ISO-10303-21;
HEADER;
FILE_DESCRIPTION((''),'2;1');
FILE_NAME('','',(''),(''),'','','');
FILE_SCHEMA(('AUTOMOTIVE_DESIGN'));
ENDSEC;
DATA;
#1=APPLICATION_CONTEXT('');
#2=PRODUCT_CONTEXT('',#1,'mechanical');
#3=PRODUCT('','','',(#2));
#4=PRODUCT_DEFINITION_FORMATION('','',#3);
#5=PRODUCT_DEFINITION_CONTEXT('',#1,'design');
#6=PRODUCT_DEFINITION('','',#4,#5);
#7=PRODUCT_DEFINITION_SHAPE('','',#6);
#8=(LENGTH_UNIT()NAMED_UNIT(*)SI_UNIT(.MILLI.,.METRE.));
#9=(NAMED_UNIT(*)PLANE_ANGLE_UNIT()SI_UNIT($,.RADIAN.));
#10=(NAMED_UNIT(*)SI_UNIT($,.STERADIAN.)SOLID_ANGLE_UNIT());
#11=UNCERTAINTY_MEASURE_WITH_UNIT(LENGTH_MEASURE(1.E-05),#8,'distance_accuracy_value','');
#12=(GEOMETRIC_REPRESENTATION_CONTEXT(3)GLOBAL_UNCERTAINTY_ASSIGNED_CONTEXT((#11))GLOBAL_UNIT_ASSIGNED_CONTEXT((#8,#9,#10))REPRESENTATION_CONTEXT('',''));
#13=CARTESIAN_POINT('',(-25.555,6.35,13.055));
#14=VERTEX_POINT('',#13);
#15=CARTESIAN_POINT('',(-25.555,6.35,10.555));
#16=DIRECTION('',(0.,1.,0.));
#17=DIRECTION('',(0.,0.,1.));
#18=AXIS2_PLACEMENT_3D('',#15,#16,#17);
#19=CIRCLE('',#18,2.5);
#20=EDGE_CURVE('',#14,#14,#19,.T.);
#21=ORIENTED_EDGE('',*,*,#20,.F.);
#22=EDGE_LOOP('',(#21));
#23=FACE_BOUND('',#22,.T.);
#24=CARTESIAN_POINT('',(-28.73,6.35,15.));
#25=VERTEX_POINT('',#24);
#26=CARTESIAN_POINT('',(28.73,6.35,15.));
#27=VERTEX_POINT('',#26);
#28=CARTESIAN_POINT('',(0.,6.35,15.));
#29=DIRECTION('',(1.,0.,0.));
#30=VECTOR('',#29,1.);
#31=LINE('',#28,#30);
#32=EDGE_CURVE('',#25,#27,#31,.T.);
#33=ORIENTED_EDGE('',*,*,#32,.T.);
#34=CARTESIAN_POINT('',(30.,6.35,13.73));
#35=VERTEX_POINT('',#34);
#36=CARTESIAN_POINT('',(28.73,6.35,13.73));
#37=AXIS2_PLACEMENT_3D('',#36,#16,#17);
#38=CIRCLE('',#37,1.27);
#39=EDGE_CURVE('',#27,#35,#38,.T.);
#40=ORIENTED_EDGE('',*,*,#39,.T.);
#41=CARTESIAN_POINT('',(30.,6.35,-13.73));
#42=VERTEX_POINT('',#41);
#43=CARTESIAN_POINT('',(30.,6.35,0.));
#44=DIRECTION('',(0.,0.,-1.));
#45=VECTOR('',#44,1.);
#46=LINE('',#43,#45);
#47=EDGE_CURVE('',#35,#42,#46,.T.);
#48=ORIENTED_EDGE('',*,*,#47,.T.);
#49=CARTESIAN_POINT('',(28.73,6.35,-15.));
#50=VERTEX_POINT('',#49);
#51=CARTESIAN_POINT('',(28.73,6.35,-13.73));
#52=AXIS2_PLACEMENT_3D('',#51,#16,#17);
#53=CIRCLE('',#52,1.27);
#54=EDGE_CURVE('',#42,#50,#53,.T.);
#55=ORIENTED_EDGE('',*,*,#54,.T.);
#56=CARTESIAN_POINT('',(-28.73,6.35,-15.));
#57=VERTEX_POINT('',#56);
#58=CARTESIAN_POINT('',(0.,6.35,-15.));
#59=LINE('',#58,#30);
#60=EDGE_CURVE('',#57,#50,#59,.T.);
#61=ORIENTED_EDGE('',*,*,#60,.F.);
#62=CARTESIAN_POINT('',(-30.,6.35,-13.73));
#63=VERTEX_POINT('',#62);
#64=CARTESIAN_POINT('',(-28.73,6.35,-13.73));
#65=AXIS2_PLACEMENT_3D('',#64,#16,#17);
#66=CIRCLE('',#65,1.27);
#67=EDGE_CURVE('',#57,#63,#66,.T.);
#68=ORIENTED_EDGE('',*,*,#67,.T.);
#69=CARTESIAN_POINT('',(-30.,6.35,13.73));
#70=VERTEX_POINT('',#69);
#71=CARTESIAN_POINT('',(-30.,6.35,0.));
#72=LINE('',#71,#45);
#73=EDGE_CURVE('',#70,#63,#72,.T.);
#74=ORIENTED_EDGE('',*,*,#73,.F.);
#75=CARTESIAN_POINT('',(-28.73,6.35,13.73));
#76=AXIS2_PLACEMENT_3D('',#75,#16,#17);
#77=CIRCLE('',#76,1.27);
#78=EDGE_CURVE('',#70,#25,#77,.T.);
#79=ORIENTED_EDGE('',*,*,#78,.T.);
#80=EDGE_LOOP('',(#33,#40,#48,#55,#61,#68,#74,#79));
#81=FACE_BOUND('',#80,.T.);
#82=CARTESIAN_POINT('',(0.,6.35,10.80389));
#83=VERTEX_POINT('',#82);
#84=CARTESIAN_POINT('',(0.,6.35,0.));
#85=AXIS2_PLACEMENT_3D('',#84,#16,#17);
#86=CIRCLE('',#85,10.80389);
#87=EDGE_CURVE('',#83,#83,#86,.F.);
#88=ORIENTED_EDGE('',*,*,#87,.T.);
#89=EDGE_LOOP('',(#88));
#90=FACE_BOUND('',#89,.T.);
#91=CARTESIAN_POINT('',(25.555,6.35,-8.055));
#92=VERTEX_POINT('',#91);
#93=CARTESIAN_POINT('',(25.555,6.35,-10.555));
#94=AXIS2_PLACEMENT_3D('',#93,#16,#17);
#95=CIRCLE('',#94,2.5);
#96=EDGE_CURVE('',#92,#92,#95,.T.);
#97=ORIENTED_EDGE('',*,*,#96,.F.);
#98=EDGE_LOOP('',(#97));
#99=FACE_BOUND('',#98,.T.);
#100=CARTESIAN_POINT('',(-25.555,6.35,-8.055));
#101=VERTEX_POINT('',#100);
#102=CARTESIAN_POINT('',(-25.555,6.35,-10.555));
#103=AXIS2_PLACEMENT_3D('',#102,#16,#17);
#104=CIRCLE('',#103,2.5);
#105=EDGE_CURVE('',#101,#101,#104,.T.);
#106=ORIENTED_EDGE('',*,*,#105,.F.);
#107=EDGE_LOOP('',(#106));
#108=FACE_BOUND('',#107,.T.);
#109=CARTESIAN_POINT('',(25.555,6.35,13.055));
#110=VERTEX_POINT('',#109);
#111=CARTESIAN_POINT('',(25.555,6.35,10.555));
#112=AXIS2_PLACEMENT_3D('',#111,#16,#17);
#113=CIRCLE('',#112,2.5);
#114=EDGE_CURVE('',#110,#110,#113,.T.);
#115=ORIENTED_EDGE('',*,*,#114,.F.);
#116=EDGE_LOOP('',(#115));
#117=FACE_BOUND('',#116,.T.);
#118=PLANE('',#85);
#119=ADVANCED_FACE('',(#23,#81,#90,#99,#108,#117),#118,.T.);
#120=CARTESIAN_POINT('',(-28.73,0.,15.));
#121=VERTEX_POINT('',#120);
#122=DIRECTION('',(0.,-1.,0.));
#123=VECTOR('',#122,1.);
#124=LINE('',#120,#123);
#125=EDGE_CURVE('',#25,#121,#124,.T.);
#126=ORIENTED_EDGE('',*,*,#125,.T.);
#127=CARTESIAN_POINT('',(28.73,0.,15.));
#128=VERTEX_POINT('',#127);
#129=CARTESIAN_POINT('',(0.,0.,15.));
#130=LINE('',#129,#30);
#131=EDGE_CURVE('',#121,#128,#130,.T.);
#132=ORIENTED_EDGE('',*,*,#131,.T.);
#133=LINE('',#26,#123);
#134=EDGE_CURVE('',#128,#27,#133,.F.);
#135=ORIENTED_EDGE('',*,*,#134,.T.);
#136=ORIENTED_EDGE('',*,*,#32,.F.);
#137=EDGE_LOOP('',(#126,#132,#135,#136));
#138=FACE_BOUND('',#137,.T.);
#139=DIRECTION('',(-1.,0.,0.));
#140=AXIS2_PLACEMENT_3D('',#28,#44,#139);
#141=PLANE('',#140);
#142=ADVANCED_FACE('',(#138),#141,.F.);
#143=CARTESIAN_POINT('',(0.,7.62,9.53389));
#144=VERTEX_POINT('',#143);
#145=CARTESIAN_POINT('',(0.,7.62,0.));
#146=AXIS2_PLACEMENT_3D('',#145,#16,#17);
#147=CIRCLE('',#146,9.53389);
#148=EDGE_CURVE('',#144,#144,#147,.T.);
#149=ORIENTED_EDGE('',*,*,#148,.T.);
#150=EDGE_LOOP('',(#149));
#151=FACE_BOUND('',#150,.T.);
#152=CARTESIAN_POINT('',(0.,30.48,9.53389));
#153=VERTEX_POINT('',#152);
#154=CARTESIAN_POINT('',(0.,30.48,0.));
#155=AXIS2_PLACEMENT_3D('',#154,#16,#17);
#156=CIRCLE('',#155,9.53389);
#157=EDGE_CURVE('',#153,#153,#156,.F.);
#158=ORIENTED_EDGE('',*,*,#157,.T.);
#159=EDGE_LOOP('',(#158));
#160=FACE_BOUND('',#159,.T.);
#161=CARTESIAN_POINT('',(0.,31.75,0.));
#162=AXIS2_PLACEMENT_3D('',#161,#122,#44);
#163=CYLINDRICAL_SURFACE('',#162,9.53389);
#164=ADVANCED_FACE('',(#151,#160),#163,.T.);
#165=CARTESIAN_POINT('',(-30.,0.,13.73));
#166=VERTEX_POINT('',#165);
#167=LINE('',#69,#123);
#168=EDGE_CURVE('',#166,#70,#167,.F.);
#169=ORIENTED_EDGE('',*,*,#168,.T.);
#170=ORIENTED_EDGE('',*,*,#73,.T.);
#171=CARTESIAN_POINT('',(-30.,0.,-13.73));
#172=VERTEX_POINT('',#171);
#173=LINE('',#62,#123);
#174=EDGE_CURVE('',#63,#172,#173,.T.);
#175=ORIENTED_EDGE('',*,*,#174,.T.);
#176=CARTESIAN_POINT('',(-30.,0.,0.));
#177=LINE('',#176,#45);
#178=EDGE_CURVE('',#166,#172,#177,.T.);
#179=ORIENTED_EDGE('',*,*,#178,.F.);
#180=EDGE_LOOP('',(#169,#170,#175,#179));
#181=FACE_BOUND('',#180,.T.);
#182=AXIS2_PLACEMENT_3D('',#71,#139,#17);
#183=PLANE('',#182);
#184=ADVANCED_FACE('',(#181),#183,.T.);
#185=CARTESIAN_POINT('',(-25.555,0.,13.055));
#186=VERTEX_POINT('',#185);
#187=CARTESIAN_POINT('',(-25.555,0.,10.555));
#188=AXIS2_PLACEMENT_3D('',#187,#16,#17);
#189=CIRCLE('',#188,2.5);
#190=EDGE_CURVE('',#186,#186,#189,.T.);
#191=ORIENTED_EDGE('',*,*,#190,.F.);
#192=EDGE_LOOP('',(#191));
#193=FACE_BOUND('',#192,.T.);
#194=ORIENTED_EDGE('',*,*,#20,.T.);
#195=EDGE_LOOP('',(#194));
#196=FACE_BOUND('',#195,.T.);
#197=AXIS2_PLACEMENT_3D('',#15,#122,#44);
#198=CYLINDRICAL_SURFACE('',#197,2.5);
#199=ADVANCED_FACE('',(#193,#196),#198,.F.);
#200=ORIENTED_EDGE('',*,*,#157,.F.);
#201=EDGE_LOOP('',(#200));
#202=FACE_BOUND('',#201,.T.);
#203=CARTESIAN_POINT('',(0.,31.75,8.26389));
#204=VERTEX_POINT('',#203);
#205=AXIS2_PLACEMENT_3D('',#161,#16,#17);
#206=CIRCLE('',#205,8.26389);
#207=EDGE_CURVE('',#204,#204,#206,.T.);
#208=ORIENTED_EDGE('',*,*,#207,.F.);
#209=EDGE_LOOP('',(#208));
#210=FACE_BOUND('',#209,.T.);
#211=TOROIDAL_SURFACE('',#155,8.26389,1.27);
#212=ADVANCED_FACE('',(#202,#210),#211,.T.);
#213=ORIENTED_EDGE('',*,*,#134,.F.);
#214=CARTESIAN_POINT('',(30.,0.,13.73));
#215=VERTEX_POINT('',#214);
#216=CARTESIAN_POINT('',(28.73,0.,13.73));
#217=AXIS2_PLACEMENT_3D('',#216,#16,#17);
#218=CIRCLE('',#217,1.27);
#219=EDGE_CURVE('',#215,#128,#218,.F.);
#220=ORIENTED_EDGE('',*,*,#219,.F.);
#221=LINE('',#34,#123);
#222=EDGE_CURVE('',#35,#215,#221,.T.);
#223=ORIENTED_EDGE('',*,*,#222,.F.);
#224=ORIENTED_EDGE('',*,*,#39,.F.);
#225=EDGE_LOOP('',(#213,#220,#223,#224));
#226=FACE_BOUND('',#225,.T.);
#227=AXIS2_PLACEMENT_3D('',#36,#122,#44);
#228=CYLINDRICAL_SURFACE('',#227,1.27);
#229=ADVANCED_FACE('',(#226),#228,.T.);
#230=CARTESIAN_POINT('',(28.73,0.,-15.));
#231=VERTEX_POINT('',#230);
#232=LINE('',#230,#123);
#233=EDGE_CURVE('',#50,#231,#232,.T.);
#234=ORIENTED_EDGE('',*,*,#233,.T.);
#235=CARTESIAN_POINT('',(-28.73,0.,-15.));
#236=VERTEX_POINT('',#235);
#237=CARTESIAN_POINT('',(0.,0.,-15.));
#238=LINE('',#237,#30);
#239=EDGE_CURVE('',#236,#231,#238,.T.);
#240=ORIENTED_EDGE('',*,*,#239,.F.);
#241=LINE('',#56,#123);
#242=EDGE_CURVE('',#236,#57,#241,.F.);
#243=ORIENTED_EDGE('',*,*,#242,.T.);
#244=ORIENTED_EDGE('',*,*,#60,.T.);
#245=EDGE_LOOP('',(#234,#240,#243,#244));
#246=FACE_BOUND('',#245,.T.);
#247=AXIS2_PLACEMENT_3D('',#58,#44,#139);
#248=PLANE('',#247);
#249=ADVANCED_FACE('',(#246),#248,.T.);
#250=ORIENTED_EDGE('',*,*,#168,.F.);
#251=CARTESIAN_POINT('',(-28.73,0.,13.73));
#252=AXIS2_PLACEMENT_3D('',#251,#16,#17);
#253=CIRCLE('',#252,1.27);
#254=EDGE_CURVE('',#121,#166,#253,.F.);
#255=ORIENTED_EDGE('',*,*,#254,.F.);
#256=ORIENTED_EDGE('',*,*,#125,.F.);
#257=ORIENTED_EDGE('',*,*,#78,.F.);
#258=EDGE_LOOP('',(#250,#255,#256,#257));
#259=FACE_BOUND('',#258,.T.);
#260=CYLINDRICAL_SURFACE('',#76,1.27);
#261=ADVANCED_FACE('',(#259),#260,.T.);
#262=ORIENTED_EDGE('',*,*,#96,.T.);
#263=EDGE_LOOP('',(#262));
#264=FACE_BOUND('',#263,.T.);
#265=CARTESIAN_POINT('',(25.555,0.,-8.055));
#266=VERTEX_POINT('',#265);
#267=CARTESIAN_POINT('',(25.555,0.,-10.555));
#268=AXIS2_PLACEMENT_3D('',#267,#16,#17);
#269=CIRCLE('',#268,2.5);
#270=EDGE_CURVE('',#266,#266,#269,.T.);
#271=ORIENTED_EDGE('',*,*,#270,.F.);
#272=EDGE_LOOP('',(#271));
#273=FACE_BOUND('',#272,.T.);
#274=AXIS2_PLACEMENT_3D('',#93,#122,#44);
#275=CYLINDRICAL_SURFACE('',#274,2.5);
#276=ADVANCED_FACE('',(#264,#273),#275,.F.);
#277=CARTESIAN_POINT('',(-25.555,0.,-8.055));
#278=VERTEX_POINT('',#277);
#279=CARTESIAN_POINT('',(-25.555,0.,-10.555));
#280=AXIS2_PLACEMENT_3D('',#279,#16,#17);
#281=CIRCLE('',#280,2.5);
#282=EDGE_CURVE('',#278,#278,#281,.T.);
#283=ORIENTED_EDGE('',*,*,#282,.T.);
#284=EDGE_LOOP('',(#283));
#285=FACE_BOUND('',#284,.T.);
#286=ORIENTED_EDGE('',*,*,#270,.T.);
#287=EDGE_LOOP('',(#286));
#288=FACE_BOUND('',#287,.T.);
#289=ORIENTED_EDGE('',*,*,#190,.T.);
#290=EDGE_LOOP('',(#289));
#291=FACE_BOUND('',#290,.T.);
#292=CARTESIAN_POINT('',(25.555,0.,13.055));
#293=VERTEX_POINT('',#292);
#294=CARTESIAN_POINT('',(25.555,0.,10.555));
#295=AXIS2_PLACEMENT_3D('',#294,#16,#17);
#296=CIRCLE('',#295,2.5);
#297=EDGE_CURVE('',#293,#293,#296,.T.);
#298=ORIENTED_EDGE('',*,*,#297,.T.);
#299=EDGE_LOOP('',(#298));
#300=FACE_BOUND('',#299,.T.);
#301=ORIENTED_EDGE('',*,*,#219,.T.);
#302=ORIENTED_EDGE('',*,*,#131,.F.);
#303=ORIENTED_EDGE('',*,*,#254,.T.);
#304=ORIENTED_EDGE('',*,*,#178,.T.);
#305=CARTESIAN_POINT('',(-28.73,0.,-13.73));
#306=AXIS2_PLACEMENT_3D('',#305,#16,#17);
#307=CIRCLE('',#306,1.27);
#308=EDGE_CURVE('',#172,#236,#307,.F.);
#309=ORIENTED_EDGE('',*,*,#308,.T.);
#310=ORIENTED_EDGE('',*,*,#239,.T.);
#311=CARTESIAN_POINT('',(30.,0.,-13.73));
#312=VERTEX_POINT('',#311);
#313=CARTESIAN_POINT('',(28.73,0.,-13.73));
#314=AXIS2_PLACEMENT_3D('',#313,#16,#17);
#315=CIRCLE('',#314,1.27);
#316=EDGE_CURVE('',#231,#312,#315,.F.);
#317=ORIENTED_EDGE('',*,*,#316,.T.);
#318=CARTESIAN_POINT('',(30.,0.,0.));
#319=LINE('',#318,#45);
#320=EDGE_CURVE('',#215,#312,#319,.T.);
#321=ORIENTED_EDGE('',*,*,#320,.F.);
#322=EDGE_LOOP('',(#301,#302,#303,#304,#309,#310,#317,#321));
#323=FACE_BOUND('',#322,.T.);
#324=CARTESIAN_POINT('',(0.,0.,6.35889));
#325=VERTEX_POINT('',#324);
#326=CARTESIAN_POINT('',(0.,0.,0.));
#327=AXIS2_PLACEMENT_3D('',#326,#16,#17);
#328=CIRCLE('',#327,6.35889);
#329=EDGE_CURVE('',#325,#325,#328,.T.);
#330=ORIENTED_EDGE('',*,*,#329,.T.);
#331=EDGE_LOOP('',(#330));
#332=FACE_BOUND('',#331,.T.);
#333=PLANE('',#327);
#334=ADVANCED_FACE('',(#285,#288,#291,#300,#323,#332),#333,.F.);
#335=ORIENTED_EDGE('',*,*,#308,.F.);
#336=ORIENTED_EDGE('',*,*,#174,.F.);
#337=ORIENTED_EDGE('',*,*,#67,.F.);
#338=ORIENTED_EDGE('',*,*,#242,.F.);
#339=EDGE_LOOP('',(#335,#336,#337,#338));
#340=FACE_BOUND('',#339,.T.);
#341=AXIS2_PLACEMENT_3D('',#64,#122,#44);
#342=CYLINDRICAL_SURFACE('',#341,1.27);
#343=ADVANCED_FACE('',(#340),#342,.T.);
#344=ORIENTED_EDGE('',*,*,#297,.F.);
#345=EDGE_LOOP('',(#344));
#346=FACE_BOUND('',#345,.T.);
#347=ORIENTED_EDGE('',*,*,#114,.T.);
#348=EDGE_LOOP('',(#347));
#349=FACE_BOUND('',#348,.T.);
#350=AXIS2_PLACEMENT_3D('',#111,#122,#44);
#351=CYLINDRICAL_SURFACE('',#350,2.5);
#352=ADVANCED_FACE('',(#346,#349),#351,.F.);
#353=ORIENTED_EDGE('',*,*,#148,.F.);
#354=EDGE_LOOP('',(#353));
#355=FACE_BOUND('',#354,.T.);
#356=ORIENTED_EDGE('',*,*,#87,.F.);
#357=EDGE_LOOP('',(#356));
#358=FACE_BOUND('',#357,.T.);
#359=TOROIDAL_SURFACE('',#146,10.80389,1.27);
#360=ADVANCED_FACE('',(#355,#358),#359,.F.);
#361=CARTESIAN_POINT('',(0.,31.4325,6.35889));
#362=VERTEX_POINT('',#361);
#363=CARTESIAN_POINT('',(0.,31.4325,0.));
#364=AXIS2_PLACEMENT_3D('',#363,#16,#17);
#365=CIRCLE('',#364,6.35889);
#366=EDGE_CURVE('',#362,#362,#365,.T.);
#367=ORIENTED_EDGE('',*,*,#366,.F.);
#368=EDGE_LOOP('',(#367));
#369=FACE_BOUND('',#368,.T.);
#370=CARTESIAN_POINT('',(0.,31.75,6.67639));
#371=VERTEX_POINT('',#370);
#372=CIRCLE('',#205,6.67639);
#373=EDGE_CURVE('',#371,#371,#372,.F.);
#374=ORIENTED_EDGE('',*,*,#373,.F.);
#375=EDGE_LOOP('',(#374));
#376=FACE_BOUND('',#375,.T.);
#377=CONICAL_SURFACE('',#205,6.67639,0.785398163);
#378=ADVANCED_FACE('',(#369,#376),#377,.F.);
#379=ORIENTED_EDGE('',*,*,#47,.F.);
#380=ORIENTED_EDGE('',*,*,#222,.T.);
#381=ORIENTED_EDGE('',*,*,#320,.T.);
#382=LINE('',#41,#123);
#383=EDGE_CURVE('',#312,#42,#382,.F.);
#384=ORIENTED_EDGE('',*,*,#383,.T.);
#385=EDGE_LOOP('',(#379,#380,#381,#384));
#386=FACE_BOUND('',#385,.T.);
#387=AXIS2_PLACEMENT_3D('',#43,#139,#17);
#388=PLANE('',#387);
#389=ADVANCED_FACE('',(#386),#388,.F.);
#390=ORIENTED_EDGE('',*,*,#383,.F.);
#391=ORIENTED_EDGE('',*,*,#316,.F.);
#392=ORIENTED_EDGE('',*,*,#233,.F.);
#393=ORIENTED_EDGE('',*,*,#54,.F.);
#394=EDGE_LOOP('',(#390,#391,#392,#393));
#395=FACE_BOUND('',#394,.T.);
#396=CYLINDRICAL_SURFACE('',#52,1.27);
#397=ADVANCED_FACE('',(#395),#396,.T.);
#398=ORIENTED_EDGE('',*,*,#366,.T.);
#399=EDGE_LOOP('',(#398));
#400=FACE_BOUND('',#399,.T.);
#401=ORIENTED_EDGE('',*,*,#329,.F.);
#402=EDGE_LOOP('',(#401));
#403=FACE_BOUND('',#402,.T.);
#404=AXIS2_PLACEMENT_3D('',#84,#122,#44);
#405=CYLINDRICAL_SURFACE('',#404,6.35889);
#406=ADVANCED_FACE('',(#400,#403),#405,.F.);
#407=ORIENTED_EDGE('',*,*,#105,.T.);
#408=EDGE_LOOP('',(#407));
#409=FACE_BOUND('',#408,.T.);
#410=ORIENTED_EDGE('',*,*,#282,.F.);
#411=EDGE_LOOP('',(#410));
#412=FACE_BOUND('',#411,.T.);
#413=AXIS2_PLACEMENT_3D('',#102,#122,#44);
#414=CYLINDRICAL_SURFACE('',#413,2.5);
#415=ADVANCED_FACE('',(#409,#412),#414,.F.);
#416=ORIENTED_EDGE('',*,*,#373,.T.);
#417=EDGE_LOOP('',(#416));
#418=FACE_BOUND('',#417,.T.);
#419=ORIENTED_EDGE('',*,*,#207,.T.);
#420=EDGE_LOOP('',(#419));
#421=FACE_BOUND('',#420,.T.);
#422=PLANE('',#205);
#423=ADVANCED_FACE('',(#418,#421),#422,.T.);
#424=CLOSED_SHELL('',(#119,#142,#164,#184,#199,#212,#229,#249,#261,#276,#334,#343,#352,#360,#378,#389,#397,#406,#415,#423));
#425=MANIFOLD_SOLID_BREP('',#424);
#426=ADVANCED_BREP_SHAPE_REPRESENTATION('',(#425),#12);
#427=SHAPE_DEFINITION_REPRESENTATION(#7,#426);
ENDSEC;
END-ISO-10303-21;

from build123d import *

# Parameters (mm, degrees)
SKETCH1_W           = 59.999999888
SKETCH1_H           = 29.999999944
SKETCH1_R           = 2.499999953
SKETCH1_R_2         = 6.35889
BOSS_EXTRUDE1_DEPTH = 6.35
SKETCH2_R           = 9.53389
SKETCH2_R_2         = 6.35889
BOSS_EXTRUDE2_DEPTH = 25.4
FILLET1_R           = 1.27
CHAMFER5_SIZE       = 0.3175


with BuildPart() as part:
    # Sketch1 → Boss-Extrude1 (new body)
    with BuildSketch(Plane(origin=(0, 0, 0), x_dir=(1, 0, 0), z_dir=(0, 1, 0))):
        Rectangle(SKETCH1_W, SKETCH1_H)
        with Locations((-25.554999944, 10.554999972)):
            Circle(SKETCH1_R, mode=Mode.SUBTRACT)
        with Locations((25.554999944, 10.554999972)):
            Circle(SKETCH1_R, mode=Mode.SUBTRACT)
        with Locations((25.554999944, -10.554999972)):
            Circle(SKETCH1_R, mode=Mode.SUBTRACT)
        with Locations((-25.554999944, -10.554999972)):
            Circle(SKETCH1_R, mode=Mode.SUBTRACT)
        Circle(SKETCH1_R_2, mode=Mode.SUBTRACT)
    extrude(amount=BOSS_EXTRUDE1_DEPTH)

    # Sketch2 → Boss-Extrude2 (add)
    with BuildSketch(Plane(origin=(0, 6.35, 0), x_dir=(1, 0, 0), z_dir=(0, 1, 0))):
        Circle(SKETCH2_R)
        Circle(SKETCH2_R_2, mode=Mode.SUBTRACT)
    extrude(amount=BOSS_EXTRUDE2_DEPTH)

    # Fillet1
    fillet1_edges = [part.edges().sort_by_distance(p)[0] for p in [
        (-9.53389, 31.75, 0),
        (-9.53389, 6.35, 0),
        (-29.999999944, 3.175, -14.999999972),
        (-29.999999944, 3.175, 14.999999972),
        (29.999999944, 3.175, -14.999999972),
        (29.999999944, 3.175, 14.999999972),
    ]]
    fillet(fillet1_edges, radius=FILLET1_R)

    # Chamfer5
    chamfer5_edges = [part.edges().sort_by_distance(p)[0] for p in [
        (-6.35889, 31.75, 0),
    ]]
    chamfer(chamfer5_edges, length=CHAMFER5_SIZE)


solid = part.part
